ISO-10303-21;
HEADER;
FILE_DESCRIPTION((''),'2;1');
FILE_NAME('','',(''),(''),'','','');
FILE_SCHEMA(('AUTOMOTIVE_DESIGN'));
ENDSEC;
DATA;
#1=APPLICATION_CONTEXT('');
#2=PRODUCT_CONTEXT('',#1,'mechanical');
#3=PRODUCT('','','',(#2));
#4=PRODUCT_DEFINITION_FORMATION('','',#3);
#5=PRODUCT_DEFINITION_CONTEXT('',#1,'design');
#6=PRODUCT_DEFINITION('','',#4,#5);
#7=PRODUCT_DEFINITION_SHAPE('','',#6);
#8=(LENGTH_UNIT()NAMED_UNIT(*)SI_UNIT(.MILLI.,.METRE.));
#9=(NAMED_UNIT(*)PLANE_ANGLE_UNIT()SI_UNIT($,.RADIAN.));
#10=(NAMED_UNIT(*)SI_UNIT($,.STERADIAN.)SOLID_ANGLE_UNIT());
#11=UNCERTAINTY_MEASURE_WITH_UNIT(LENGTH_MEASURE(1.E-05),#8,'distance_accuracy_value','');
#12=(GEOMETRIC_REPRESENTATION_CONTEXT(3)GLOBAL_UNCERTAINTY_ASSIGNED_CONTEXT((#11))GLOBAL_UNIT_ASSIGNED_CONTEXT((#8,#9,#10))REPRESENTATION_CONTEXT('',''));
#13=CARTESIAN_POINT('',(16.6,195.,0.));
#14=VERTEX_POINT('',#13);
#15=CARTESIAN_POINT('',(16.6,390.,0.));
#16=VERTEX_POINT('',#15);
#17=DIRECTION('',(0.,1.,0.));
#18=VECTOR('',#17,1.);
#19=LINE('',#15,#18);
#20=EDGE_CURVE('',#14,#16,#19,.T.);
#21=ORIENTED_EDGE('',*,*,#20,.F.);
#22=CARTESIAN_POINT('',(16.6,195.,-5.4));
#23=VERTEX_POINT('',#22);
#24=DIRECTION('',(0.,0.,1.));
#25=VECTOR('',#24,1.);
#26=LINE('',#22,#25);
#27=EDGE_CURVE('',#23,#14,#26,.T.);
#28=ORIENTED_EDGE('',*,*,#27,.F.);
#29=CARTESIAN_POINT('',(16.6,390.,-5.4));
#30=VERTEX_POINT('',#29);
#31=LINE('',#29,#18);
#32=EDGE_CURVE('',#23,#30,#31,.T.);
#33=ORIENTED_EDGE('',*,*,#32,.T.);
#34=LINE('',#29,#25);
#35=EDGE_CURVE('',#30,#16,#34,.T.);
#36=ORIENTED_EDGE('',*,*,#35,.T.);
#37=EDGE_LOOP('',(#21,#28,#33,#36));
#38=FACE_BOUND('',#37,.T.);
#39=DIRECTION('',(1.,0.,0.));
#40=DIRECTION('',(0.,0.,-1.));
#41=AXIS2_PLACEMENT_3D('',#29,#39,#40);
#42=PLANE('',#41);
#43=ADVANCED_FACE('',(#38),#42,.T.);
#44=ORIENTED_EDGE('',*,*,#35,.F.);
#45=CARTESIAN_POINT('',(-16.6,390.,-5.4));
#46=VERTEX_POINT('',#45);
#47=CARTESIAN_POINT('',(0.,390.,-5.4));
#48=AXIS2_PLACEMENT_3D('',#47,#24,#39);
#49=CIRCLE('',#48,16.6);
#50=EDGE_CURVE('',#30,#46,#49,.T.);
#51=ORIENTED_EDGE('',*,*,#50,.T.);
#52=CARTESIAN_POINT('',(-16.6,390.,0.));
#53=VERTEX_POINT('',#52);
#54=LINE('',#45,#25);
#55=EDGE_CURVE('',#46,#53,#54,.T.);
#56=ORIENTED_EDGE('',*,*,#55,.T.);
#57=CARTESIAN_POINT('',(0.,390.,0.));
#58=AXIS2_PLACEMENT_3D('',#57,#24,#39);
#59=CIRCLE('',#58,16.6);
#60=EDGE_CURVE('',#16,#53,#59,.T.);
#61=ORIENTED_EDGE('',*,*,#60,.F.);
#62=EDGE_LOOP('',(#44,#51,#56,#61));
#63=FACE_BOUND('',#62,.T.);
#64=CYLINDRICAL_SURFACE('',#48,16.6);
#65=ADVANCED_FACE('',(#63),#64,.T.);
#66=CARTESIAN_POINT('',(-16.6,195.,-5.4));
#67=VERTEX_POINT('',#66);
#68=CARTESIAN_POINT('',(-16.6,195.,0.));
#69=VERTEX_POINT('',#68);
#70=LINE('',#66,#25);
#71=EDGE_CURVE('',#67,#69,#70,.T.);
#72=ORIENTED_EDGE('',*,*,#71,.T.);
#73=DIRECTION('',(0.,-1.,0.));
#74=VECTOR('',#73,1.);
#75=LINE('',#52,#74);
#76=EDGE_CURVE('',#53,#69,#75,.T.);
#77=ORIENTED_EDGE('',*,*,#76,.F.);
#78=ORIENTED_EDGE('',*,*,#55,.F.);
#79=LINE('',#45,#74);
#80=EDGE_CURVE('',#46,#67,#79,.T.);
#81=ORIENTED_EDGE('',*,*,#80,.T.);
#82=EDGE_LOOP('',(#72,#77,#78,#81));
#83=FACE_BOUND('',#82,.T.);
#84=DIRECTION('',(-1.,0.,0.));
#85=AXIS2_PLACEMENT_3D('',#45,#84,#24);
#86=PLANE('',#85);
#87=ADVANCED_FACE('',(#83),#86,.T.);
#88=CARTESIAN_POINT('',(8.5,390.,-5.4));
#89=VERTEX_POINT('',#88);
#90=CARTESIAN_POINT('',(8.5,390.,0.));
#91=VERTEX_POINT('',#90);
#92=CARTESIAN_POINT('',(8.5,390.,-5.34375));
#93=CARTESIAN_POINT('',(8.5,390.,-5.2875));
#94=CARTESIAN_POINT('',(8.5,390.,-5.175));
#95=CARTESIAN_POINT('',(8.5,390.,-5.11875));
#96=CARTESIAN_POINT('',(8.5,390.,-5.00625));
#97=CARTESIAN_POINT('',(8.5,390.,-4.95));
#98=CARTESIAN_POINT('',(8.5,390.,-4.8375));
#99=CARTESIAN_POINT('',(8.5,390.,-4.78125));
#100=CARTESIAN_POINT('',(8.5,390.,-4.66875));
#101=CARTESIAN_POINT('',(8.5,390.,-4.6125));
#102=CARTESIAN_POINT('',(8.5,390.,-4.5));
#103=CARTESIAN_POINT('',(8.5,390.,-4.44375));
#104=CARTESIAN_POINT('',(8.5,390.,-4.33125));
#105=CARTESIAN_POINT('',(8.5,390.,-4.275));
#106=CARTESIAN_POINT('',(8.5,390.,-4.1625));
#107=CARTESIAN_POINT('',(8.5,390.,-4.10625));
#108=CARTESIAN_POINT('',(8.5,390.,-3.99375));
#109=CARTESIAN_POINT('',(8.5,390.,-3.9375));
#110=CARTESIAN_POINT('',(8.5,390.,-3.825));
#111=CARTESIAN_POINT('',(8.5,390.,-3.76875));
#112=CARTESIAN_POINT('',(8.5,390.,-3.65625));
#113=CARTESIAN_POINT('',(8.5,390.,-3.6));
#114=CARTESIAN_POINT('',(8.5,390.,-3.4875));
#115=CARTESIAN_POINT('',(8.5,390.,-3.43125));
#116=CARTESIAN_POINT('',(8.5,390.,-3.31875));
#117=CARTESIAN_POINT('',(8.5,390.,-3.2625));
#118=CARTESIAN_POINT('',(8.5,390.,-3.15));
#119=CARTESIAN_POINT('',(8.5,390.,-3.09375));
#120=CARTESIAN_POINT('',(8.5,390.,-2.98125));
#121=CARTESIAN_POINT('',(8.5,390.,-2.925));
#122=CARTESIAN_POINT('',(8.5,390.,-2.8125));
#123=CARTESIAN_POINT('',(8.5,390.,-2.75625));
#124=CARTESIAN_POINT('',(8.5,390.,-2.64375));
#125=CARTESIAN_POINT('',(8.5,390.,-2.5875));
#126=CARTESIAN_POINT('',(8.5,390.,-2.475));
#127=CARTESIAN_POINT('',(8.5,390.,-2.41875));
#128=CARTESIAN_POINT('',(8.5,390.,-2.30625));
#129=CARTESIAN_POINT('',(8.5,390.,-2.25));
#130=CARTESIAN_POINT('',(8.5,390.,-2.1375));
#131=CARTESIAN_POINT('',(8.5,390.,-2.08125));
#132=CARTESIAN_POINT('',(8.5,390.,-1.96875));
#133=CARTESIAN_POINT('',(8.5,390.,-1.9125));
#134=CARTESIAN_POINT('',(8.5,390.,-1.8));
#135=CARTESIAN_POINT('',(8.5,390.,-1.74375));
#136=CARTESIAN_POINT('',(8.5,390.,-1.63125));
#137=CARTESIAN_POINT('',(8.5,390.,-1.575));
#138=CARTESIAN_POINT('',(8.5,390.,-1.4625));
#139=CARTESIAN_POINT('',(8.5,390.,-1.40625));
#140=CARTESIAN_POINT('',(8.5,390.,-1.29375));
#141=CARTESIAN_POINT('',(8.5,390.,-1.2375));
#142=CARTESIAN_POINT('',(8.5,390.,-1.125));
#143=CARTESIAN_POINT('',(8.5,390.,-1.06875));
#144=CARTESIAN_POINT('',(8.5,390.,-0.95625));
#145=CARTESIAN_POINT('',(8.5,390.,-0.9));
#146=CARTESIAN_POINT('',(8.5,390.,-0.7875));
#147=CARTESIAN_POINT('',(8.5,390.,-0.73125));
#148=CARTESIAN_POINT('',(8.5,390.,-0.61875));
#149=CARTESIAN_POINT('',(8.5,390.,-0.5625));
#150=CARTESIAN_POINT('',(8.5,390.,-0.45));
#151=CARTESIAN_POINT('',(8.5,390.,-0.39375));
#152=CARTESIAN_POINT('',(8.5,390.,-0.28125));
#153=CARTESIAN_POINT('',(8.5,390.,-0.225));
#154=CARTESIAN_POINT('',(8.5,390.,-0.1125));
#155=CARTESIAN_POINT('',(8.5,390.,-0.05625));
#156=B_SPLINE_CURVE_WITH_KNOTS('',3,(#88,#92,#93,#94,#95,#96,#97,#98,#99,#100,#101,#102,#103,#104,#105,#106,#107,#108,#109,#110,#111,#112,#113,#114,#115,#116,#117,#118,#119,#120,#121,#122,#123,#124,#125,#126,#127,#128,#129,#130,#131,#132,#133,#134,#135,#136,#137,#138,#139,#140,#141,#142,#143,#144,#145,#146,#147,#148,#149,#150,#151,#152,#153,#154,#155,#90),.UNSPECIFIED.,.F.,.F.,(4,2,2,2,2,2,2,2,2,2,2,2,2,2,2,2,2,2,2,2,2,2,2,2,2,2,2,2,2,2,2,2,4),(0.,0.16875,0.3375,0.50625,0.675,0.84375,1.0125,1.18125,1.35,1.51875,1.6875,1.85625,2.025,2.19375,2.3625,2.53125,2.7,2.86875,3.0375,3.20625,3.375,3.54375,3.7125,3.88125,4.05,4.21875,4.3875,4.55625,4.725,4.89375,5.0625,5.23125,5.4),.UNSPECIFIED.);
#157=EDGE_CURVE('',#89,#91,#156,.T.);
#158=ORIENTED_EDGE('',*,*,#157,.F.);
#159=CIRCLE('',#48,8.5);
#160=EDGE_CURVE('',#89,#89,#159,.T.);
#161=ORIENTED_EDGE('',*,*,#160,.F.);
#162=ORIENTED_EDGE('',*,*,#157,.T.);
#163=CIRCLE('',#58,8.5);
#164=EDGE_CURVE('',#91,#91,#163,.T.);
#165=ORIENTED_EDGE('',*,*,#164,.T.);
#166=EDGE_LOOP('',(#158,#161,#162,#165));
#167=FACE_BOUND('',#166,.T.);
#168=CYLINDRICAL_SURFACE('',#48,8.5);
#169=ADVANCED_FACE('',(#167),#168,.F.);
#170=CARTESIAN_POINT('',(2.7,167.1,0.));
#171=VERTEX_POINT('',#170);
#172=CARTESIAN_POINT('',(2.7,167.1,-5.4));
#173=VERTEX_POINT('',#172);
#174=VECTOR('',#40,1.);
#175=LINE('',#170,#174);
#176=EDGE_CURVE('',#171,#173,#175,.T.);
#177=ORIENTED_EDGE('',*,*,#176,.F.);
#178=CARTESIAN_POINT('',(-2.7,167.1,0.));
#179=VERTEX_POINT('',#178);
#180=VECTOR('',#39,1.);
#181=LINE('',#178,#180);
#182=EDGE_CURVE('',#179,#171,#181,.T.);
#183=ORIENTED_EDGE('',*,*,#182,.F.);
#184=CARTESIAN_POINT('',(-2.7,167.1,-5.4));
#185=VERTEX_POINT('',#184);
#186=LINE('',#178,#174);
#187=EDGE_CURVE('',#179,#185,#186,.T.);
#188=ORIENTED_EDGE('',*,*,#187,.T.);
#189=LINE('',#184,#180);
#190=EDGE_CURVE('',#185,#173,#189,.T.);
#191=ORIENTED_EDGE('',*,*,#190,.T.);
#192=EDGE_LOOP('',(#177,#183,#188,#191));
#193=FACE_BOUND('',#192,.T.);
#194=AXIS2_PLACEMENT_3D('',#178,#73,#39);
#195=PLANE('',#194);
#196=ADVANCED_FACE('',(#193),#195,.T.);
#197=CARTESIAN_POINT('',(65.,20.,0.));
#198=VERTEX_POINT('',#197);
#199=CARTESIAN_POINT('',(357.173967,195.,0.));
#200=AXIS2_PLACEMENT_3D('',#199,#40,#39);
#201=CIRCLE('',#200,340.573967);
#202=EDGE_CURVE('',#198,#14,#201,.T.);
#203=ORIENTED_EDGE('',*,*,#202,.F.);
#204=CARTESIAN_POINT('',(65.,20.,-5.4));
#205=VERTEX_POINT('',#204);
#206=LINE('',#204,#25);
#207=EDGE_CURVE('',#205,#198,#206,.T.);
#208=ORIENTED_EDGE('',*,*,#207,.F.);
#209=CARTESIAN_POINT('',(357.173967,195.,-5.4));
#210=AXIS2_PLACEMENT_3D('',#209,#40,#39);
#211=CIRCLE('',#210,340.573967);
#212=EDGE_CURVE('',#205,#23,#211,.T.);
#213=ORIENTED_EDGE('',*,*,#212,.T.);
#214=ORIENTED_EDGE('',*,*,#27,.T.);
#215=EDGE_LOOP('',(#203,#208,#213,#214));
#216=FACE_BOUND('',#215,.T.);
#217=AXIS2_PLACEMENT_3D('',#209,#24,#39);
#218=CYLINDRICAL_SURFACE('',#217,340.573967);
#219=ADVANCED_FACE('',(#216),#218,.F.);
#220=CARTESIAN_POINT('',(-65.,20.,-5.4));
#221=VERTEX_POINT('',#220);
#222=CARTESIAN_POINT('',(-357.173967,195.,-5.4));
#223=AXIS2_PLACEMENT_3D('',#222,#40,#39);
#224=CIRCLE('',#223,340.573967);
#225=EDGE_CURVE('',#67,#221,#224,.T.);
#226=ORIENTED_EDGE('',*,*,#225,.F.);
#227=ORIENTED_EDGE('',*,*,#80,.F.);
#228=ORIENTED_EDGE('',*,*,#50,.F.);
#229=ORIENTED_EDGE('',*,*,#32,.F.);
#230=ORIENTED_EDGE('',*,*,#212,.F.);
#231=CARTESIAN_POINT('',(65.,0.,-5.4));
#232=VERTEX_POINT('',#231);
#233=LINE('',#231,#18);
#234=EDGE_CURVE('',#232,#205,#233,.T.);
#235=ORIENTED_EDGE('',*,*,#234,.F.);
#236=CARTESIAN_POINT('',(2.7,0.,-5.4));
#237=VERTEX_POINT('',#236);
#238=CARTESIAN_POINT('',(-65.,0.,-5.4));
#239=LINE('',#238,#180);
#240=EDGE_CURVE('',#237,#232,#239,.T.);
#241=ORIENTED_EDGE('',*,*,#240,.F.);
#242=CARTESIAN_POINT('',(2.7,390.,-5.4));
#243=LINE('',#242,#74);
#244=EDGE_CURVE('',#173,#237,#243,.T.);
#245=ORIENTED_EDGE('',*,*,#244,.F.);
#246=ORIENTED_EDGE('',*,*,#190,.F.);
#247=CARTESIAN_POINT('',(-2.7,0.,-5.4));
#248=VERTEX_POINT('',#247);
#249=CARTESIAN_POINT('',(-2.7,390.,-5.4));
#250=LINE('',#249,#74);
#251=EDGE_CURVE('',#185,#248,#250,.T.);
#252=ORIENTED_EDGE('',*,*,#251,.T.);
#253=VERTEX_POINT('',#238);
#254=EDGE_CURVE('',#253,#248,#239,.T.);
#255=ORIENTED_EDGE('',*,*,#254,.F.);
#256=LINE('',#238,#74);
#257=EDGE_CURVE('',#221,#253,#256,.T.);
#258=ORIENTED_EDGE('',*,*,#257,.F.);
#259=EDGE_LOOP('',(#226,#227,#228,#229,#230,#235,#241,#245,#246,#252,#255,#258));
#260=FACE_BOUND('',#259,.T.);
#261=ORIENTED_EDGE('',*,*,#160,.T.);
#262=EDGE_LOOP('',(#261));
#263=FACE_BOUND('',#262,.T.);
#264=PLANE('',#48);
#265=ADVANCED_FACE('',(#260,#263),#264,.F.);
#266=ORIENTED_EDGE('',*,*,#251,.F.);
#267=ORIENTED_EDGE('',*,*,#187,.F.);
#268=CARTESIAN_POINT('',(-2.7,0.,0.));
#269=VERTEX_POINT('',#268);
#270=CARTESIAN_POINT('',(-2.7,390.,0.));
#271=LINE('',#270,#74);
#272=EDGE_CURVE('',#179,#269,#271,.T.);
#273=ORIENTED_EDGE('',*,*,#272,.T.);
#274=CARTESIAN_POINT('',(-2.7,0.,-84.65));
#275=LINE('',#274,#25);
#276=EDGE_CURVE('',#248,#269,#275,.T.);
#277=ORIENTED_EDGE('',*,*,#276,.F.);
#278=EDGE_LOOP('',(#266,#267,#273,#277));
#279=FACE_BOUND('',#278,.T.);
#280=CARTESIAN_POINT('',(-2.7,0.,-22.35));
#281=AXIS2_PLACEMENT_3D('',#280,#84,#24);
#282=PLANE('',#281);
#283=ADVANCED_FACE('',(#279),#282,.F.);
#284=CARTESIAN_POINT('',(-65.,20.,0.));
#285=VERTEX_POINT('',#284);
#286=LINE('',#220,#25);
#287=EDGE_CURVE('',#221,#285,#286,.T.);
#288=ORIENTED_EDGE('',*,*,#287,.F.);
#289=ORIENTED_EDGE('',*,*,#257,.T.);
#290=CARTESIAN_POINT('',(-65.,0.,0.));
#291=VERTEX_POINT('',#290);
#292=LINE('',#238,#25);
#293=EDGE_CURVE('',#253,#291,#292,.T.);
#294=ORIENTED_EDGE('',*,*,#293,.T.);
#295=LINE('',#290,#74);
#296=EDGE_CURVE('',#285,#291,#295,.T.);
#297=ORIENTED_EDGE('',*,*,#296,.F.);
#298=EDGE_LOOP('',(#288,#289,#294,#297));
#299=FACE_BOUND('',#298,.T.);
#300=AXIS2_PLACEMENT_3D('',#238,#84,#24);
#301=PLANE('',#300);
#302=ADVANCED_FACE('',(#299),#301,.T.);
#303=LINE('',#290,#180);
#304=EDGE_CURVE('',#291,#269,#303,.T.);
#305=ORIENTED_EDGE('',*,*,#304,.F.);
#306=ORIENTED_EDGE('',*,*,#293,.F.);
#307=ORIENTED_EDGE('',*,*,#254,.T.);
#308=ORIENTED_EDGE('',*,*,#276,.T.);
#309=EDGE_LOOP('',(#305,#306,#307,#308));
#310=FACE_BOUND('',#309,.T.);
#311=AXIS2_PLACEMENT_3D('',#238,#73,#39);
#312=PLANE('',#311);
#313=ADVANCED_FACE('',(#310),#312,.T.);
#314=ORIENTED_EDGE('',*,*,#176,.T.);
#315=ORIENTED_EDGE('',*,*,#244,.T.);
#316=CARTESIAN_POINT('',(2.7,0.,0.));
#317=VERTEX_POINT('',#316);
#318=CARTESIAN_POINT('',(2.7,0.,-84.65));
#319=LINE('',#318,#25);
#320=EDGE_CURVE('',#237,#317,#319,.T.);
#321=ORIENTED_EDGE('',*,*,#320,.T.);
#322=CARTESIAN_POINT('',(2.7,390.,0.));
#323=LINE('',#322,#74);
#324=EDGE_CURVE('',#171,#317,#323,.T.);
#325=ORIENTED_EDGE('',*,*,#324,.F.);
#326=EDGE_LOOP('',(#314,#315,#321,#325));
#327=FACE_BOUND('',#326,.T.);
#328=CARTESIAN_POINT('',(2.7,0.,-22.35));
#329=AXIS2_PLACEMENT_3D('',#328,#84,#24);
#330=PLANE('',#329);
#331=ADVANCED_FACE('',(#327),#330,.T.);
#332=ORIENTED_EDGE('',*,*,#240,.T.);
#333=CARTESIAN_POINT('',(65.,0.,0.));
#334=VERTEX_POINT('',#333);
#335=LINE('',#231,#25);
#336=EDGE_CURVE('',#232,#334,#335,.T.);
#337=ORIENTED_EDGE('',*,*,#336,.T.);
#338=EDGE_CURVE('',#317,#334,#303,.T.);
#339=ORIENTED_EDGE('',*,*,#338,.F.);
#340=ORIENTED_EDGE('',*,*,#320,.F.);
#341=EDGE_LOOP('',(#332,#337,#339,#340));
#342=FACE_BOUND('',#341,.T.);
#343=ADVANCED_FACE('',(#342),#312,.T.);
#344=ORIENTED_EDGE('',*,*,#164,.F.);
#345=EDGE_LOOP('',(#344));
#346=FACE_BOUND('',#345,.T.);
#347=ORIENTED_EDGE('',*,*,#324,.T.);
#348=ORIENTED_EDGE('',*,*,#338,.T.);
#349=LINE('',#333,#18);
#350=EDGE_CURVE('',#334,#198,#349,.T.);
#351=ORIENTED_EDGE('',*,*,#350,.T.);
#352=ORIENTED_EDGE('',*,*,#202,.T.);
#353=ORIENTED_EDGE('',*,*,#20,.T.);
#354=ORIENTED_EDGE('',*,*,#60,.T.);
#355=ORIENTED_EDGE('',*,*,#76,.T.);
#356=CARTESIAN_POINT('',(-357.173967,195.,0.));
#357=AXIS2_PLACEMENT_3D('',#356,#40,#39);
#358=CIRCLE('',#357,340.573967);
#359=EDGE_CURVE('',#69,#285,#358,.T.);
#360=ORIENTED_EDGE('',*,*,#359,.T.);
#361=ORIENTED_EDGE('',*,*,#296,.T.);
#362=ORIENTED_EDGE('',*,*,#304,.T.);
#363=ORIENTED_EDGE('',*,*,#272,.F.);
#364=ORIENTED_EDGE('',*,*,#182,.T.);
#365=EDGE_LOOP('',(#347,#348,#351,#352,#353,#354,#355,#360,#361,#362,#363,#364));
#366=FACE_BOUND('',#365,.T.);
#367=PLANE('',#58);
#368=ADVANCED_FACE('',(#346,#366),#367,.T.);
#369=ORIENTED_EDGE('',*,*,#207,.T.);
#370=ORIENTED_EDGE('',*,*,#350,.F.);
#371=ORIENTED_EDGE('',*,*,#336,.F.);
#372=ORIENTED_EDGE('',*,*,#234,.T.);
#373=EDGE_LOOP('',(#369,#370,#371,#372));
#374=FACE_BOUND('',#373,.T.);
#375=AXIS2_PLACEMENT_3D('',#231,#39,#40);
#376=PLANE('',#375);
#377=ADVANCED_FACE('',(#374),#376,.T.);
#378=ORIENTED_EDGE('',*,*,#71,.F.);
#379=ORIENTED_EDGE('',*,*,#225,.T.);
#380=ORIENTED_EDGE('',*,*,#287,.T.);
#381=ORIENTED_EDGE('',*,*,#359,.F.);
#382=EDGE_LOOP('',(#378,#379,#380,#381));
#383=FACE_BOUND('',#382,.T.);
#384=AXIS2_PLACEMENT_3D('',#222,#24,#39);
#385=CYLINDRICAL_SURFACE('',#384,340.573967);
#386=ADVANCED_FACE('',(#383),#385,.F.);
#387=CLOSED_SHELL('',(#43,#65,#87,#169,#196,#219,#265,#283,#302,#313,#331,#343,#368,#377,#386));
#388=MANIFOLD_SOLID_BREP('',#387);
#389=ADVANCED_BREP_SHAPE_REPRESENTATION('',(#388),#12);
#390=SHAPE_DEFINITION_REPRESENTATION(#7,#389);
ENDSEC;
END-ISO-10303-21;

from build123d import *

# Parameters (mm, degrees)
SKETCH2_R           = 8.5
BOSS_EXTRUDE1_DEPTH = 5.4
CAVITY1_START       = -2.7
CAVITY1_OUTLINE_W   = 167.1
CAVITY1_OUTLINE_H   = 5.4
CAVITY1_DEPTH       = 5.4


# Read off the part's stored shape, not the designer's step: Cavity1
with BuildPart() as part:
    # Sketch2 → Boss-Extrude1 (new body)
    with BuildSketch(Plane.XY):
        with BuildLine():
            Line((-65, 0), (65, 0))
            Line((65, 0), (65, 20))
            ThreePointArc((65, 20), (28.922939589, 104.215144435), (16.6, 195))
            Line((16.6, 195), (16.6, 390))
            ThreePointArc((16.6, 390), (0, 406.6), (-16.6, 390))
            Line((-16.6, 390), (-16.6, 195))
            ThreePointArc((-16.6, 195), (-28.922939589, 104.215144435), (-65, 20))
            Line((-65, 20), (-65, 0))
        make_face()
        with Locations((0, 390)):
            Circle(SKETCH2_R, mode=Mode.SUBTRACT)
    extrude(amount=-BOSS_EXTRUDE1_DEPTH)

    # Cavity1 outline → Cavity1 (cut)
    with BuildSketch(Plane.YZ.offset(CAVITY1_START)):
        with Locations((83.55, -2.7)):
            Rectangle(CAVITY1_OUTLINE_W, CAVITY1_OUTLINE_H)
    extrude(amount=CAVITY1_DEPTH, mode=Mode.SUBTRACT)


solid = part.part
